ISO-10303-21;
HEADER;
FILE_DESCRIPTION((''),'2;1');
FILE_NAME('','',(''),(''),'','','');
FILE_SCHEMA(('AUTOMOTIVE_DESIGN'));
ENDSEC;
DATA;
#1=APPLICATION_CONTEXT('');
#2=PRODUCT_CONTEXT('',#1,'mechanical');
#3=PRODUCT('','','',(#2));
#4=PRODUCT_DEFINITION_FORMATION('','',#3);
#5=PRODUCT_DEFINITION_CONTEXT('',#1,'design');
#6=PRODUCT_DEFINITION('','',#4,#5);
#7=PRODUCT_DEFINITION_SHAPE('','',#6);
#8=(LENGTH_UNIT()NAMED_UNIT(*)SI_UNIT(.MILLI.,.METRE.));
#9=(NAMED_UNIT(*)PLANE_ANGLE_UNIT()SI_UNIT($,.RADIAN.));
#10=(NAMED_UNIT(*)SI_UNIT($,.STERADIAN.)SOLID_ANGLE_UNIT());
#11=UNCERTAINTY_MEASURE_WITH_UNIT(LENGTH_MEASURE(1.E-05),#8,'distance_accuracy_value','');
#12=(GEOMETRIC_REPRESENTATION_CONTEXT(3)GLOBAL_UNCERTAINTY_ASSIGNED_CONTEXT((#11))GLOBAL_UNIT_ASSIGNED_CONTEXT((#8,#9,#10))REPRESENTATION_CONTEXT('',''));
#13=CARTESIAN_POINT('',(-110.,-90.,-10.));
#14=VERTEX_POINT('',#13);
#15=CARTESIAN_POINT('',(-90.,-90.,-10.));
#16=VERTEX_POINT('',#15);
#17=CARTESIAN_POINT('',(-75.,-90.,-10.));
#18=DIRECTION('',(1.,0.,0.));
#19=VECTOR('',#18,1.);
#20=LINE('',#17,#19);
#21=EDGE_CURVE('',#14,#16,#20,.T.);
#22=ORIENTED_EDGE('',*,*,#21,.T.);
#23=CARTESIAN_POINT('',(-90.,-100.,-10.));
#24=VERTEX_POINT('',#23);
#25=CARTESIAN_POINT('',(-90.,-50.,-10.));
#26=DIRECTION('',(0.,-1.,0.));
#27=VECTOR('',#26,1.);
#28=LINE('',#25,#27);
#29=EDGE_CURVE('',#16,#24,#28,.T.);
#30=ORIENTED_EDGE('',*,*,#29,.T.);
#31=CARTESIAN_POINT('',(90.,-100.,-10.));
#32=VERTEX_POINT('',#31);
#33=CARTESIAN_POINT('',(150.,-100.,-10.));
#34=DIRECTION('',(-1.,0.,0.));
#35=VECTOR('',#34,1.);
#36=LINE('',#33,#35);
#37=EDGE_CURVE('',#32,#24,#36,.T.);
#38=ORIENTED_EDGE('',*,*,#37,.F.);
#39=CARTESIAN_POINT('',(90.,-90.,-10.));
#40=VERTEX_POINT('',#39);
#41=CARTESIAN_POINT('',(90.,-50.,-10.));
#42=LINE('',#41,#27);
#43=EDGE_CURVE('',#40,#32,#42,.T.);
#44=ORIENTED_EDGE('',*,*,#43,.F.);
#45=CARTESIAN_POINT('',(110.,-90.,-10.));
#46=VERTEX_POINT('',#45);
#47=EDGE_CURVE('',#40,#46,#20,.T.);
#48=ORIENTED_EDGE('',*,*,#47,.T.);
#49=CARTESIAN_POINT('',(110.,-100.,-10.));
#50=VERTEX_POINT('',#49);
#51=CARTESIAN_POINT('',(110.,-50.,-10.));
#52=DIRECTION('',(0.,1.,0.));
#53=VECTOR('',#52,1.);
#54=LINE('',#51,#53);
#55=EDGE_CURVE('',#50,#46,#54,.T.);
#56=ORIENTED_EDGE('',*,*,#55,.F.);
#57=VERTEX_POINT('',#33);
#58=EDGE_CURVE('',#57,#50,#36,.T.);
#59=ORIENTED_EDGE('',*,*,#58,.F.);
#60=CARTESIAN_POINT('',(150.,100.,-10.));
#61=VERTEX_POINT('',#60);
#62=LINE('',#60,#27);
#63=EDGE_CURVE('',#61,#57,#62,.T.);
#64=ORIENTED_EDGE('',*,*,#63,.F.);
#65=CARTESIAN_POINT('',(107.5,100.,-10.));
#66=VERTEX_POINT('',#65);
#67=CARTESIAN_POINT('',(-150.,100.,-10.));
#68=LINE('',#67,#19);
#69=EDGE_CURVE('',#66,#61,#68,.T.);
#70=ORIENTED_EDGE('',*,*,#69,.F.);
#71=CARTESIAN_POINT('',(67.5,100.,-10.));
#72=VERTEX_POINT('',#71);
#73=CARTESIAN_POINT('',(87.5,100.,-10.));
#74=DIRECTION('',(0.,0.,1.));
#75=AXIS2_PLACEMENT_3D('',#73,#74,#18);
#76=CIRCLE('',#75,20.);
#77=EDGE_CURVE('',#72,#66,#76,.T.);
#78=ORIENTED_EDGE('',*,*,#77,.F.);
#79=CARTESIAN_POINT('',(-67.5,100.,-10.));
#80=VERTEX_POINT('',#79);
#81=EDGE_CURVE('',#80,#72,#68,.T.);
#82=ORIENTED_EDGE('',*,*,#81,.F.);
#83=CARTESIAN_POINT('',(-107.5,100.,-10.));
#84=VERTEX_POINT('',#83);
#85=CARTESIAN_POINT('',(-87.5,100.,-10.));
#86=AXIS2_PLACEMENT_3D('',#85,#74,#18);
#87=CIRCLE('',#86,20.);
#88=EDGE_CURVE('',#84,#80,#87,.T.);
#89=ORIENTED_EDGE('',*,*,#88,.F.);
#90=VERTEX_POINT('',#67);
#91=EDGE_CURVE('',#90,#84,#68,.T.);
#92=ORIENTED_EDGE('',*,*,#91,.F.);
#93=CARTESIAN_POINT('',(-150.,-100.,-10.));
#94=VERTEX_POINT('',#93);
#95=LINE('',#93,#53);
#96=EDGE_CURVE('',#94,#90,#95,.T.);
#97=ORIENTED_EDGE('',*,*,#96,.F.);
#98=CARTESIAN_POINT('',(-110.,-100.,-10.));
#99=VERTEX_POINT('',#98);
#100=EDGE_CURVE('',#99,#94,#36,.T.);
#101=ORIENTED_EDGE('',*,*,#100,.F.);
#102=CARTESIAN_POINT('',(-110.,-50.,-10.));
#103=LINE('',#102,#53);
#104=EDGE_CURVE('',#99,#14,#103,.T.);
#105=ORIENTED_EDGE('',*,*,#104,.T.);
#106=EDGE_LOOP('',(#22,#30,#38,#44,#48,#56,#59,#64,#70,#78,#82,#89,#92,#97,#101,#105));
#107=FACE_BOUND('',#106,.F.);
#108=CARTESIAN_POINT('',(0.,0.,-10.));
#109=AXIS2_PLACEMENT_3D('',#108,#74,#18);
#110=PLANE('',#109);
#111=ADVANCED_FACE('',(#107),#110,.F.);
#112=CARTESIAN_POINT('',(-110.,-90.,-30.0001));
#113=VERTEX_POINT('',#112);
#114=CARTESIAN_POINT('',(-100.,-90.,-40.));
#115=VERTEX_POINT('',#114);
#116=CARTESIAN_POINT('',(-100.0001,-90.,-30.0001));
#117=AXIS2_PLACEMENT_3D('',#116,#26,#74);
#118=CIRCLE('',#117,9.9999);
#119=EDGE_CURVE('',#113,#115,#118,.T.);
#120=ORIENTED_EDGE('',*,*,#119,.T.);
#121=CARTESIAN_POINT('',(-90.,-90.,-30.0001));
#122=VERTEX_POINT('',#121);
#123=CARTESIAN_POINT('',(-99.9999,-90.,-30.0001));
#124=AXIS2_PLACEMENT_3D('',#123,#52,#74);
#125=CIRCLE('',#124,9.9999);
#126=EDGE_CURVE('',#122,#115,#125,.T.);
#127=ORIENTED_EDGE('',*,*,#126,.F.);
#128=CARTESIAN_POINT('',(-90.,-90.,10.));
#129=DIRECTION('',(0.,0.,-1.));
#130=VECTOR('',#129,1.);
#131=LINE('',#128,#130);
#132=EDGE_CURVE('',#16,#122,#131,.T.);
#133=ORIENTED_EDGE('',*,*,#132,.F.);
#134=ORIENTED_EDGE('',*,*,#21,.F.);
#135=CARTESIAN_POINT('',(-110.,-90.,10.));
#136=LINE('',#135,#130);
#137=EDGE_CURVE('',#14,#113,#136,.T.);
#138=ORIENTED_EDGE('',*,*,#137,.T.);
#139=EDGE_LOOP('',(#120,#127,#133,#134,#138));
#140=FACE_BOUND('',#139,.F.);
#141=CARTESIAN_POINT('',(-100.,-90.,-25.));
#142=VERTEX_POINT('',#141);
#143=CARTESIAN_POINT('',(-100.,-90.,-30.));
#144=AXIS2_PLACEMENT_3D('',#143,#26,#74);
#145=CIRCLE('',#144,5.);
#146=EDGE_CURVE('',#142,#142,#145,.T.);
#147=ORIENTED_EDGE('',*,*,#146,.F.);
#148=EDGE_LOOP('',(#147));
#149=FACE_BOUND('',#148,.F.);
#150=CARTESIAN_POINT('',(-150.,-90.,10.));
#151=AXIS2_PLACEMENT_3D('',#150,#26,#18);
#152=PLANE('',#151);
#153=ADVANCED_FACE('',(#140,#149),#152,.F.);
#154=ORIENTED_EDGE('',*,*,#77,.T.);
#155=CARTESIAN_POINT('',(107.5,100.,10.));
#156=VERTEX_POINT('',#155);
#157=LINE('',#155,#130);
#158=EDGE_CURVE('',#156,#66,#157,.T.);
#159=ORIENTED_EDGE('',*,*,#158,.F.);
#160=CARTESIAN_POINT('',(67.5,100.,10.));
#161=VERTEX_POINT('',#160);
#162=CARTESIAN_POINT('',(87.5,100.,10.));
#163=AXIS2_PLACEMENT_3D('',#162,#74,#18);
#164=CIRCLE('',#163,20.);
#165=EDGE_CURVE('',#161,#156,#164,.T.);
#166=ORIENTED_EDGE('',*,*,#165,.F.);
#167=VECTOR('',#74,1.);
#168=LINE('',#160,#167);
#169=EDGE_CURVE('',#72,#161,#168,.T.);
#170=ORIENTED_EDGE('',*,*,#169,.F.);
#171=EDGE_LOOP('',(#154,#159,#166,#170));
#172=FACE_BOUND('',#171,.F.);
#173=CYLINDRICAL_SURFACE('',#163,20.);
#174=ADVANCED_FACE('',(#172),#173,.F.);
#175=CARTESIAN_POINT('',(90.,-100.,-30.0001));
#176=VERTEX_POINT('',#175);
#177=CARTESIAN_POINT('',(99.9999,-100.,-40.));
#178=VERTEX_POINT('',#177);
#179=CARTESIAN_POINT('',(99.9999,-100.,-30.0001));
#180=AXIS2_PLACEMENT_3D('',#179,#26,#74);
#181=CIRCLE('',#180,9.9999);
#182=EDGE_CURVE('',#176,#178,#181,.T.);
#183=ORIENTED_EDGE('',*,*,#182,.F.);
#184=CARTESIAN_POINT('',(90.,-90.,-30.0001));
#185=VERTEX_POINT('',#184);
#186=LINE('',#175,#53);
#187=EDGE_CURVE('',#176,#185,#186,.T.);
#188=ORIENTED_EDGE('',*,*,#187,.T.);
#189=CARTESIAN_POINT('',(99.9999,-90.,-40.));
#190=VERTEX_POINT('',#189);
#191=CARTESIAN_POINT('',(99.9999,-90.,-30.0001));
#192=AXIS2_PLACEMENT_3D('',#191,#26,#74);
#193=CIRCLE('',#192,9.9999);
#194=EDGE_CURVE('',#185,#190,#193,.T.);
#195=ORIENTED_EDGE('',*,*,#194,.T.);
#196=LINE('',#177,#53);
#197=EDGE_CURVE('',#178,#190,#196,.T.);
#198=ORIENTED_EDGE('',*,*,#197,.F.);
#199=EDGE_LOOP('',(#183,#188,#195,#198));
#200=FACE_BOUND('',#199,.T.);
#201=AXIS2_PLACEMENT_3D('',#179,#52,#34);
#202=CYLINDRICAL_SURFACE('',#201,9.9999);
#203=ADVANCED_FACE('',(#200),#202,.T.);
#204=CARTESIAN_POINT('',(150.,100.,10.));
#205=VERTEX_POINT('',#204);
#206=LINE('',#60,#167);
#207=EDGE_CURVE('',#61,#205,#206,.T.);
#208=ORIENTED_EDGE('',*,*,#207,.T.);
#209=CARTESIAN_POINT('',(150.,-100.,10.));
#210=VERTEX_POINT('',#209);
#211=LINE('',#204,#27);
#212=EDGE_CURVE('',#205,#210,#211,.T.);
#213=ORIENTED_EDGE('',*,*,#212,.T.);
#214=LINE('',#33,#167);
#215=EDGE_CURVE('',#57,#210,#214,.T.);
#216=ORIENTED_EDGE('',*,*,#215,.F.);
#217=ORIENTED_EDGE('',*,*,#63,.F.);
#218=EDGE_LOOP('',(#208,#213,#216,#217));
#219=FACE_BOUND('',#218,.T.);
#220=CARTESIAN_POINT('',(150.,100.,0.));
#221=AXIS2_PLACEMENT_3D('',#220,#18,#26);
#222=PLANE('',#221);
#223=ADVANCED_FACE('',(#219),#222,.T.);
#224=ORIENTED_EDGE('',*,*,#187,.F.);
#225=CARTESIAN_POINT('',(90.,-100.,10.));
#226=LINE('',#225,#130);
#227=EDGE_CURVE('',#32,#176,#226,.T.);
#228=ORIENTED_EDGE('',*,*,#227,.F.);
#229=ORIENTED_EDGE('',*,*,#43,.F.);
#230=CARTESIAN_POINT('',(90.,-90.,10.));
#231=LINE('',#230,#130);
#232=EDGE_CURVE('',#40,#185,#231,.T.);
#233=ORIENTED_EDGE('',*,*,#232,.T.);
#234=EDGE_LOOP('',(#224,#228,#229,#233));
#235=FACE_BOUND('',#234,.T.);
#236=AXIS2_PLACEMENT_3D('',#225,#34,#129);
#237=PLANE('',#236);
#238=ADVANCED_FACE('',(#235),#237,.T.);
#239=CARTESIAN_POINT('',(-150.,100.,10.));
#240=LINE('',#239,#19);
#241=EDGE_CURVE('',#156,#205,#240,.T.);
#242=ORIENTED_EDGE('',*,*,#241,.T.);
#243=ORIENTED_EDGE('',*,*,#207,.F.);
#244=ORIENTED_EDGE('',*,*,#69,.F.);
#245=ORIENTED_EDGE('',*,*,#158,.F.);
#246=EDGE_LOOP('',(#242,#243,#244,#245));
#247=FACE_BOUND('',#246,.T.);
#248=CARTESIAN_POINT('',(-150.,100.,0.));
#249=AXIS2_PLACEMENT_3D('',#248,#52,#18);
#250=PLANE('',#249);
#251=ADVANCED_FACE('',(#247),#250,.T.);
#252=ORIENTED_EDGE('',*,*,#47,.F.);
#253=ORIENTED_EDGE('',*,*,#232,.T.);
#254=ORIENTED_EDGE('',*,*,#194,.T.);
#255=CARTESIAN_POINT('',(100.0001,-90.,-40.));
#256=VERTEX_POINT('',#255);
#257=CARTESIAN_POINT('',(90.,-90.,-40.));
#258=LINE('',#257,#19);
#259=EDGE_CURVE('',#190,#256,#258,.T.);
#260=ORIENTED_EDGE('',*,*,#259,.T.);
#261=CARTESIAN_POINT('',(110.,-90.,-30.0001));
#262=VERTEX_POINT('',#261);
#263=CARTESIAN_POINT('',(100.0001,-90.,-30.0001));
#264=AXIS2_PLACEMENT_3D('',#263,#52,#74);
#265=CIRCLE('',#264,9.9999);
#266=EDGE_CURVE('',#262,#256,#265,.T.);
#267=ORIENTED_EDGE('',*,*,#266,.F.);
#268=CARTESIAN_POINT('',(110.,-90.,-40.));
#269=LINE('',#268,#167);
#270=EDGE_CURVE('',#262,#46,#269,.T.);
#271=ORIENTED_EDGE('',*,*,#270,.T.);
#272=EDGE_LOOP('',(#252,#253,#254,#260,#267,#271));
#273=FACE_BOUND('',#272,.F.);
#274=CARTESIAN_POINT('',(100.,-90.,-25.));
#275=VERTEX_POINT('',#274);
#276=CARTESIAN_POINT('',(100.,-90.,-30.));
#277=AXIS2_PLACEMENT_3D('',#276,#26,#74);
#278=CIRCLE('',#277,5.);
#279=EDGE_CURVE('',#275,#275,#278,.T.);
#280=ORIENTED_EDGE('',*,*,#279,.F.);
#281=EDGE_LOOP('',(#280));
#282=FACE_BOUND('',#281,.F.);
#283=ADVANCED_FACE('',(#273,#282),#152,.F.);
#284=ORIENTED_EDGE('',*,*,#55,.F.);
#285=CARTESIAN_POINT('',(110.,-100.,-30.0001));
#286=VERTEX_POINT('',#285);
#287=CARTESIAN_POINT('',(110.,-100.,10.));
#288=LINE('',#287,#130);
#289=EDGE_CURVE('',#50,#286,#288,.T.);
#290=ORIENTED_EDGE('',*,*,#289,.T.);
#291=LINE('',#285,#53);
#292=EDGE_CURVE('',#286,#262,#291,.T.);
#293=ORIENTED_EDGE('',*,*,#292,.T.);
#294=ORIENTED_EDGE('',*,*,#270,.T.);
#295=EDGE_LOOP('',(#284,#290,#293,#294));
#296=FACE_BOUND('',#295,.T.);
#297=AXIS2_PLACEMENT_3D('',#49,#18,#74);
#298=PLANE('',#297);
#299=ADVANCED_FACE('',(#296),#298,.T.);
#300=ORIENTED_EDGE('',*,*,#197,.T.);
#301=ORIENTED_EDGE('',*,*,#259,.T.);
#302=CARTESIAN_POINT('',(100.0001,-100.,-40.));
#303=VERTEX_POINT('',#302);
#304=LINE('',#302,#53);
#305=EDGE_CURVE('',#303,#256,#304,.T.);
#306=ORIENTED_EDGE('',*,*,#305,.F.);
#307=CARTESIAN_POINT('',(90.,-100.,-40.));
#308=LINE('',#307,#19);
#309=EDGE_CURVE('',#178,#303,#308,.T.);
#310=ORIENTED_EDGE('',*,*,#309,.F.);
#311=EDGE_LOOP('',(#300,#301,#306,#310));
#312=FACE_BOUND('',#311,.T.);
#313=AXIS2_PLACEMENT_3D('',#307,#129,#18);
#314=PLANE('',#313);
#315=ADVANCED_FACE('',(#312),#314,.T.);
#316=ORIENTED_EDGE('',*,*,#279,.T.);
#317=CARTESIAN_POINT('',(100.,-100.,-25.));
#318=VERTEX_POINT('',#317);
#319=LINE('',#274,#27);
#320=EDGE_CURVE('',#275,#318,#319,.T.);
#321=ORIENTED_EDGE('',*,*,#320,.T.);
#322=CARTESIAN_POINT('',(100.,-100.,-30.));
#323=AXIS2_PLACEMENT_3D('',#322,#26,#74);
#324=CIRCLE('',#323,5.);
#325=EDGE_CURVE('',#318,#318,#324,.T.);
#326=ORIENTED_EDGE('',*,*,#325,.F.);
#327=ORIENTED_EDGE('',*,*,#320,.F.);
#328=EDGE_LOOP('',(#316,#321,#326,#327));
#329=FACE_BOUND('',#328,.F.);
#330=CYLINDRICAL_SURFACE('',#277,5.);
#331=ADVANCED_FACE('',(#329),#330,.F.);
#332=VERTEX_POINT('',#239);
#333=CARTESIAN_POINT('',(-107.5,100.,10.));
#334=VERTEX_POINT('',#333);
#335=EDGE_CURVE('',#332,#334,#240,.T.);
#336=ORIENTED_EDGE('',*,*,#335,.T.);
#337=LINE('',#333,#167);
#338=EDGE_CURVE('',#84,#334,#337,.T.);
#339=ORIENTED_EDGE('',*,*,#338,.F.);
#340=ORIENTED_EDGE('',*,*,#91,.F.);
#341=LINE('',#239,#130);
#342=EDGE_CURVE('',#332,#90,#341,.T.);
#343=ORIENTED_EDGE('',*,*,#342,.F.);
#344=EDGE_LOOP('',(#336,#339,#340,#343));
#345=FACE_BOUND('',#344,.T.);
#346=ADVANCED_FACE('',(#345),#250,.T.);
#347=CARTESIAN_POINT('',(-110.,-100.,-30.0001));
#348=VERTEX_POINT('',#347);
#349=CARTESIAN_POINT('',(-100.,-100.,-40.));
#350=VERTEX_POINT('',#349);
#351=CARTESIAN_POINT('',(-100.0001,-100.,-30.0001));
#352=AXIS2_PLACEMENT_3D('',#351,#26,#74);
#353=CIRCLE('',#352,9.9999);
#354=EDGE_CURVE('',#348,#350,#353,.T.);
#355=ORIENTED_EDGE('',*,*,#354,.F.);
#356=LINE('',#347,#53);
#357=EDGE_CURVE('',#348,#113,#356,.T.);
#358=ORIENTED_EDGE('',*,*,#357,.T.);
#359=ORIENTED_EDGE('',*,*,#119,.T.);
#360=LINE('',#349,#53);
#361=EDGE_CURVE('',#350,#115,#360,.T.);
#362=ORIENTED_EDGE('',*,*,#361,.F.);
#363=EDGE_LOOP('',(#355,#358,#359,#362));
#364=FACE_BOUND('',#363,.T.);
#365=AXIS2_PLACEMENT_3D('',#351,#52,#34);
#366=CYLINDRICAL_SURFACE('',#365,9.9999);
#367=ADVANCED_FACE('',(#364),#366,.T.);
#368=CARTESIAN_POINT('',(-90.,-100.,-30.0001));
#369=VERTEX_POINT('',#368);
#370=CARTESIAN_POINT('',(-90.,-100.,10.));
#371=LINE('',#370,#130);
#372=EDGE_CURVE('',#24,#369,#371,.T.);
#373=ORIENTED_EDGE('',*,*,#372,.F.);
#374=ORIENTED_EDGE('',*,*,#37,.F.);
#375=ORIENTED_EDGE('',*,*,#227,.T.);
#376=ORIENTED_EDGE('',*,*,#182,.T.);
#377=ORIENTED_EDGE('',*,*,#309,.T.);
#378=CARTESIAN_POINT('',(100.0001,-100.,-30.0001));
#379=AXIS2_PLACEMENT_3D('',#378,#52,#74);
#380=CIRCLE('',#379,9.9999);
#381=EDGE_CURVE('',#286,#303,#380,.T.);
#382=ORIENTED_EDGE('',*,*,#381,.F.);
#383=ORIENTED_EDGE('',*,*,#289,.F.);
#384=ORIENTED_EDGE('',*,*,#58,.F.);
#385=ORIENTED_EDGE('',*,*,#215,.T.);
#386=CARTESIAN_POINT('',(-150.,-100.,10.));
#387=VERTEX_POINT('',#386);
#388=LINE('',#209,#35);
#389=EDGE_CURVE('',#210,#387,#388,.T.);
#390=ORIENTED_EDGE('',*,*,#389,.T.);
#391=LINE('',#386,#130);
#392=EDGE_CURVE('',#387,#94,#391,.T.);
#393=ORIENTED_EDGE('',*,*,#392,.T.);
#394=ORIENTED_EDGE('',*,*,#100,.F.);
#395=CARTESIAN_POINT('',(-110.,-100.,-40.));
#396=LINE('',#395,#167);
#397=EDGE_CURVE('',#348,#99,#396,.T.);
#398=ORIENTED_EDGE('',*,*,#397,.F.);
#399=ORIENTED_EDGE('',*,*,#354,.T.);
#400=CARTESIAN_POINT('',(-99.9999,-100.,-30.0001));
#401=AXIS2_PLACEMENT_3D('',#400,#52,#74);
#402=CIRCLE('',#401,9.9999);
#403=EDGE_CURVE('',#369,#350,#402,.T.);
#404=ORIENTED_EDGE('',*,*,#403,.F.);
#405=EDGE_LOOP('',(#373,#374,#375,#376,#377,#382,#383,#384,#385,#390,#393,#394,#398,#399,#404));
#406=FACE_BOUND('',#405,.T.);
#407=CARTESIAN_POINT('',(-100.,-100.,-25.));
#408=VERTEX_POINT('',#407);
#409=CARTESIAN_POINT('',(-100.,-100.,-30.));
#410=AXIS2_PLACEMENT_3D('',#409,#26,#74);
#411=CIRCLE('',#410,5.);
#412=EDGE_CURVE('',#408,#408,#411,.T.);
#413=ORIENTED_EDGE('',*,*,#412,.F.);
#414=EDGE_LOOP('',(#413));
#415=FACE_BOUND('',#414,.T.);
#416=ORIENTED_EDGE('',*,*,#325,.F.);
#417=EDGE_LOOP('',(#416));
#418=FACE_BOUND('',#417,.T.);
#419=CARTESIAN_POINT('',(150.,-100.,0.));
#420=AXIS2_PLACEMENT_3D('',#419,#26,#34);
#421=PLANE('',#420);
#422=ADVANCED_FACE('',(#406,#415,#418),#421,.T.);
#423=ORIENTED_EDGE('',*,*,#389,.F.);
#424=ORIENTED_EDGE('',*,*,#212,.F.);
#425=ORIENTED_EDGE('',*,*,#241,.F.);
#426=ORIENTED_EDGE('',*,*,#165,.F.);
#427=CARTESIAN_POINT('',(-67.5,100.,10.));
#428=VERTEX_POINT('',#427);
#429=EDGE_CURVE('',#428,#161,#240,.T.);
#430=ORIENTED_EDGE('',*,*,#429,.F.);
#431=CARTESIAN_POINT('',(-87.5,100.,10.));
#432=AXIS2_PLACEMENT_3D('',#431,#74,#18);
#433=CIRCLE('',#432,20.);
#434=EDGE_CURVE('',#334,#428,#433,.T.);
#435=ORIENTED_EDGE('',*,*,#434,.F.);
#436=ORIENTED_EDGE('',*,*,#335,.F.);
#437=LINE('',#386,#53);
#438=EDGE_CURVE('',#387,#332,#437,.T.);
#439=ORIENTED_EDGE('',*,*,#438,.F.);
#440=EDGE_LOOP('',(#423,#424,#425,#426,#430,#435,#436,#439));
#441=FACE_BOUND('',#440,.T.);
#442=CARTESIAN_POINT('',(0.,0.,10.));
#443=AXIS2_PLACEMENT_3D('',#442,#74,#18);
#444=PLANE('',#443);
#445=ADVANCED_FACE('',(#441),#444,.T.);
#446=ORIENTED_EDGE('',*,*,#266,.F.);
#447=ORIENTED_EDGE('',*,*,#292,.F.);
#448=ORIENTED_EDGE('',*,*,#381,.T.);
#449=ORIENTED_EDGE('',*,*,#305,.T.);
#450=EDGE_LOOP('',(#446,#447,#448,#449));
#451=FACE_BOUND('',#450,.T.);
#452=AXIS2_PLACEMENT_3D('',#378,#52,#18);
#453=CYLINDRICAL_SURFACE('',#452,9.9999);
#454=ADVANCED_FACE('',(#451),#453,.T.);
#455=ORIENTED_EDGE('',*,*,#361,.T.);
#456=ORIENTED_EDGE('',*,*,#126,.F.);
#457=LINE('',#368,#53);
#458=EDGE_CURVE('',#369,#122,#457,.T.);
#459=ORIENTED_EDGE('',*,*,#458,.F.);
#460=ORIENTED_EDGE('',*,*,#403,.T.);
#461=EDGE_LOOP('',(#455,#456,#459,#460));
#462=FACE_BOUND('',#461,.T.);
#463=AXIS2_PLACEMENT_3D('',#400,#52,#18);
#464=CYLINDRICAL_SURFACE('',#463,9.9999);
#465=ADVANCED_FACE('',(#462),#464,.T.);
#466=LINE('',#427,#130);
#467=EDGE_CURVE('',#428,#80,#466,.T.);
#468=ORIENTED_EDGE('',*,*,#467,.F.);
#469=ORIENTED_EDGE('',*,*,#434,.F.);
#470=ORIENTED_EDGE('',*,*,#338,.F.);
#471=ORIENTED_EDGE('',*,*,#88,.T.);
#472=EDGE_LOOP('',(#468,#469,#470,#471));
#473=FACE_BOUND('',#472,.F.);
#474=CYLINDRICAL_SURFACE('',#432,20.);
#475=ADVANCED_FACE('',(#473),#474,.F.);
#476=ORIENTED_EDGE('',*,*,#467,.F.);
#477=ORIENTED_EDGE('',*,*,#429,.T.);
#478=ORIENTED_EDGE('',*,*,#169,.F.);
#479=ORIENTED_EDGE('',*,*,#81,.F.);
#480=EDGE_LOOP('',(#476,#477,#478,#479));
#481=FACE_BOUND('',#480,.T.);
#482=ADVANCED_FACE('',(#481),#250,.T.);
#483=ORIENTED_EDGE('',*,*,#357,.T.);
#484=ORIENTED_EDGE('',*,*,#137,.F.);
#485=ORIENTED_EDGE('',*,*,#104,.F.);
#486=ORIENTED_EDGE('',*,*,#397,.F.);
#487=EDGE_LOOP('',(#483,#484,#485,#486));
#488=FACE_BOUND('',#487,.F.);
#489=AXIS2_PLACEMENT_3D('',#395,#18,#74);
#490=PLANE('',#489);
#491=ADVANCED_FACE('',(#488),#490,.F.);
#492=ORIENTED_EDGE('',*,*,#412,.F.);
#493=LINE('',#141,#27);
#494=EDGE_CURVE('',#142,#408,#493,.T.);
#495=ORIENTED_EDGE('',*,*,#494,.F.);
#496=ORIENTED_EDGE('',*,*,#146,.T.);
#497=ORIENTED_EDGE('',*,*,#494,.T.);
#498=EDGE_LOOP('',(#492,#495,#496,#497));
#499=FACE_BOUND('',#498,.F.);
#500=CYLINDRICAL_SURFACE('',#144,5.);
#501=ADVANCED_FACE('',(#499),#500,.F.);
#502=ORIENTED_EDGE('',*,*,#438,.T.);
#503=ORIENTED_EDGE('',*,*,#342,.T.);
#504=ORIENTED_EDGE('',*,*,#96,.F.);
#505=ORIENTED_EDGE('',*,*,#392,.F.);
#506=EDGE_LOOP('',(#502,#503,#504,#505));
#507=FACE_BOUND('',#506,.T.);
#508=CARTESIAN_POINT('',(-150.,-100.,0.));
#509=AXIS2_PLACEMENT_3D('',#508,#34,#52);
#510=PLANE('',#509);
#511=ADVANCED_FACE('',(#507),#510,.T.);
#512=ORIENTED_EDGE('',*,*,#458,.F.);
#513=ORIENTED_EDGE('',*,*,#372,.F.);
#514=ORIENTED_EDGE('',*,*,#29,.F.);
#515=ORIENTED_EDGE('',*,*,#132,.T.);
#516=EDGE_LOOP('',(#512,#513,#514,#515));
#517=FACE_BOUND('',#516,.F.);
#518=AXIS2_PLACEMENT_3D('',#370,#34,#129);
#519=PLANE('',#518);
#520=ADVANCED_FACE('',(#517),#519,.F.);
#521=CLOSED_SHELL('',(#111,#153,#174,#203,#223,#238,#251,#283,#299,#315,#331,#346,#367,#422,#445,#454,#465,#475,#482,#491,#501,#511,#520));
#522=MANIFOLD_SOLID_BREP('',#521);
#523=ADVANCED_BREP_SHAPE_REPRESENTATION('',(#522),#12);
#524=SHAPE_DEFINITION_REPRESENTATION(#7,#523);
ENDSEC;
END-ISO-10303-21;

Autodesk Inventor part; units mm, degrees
ref_plane "YZ Plane" through (0, 0, 0) normal (1, 0, 0) x (0, 1, 0)
ref_plane "XZ Plane" through (0, 0, 0) normal (0, 1, 0) x (-1, 0, 0)
ref_plane "XY Plane" through (0, 0, 0) normal (0, 0, 1) x (1, 0, 0)
sketch "草图1" plane through (0, 0, 0) normal (0, 0, 1) x (1, 0, 0)
  line L0 (150, -100) -> (-150, -100)
  line L1 (-150, -100) -> (-150, 100)
  line L2 (-150, 100) -> (150, 100)
  line L3 (150, 100) -> (150, -100)
  line L4 (150, -100) -> (-150, 100) construction
  line L5 (-150, -100) -> (150, 100) construction
  point P0 (0, 0)
  dimension "d0" = 300
  dimension "d1" = 200
extrude "拉伸1" add sketch "草图1" along normal mid plane 20
sketch "草图2" plane through (0, 0, 10) normal (0, 0, 1) x (1, 0, 0)
  line L0 (150, 100) -> (-150, 100) construction
  line L1 (-150, 100) -> (-150, -100) construction
  line L2 (-150, -100) -> (150, -100) construction
  line L3 (150, -100) -> (150, 100) construction
  line L4 (150, 100) -> (-150, 100) construction
  circle A0 centre (-87.5, 100) radius 20
  line L5 (0, 0) -> (0, 160.0465) construction
  circle A1 centre (87.5, 100) radius 20
  dimension "d4" = 40
  dimension "d5" = 175
extrude "拉伸2" cut sketch "草图2" against normal blind 20
sketch "草图3" plane through (-150, -100, 10) normal (0, -1, 0) x (1, 0, 0)
  line L0 (300, -20) -> (300, 0) construction
  line L1 (0, 0) -> (300, 0) construction
  line L2 (0, -20) -> (0, 0) construction
  line L3 (300, -20) -> (0, -20) construction
  line L4 (0, -20) -> (42.5, -20) projected
  line L5 (150, -10) -> (150, 57.6375)
  line L6 (300, -20) -> (300, 0) construction
  line L7 (300, -20) -> (257.5, -20) construction
  line L8 (0, 0) -> (300, 0) projected
  line L9 (40, 0) -> (60, 0)
  line L10 (60, 0) -> (60, -50)
  line L11 (60, -50) -> (40, -50)
  line L12 (40, -50) -> (40, 0)
  line L13 (300, -20) -> (300, 0) construction
  line L14 (300, -20) -> (257.5, -20)
  line L15 (260, 0) -> (240, 0)
  line L16 (240, 0) -> (240, -50)
  line L17 (240, -50) -> (260, -50)
  line L18 (260, -50) -> (260, 0)
  point P0 (260, 0)
  point P1 (240, 0)
  dimension "d20" = 20
  dimension "d21" = 50
  dimension "d22" = 180
extrude "拉伸4" add sketch "草图3" against normal blind 10
full round fillet "全圆角3" first side at (110, -96.6667, -30) centre faces at (96.6667, -96.6667, -40) second side at (90, -96.6667, -20)
mirror "镜像1" about plane through (0, 0, 0) normal (1, 0, 0) of "全圆角3"
sketch "草图5" plane through (-150, -90, 10) normal (0, 1, 0) x (1, 0, 0)
  arc A0 (260, 40) -> (240, 40) centre (250, 40) ccw projected
  arc A1 (60, 40) -> (40, 40) centre (50, 40) ccw projected
  point P0 (150, 10)
hole "孔2" at (100, -90, -30) at (-100, -90, -30) direction (0, -1, 0) diameter 10 end through all
properties part number "支撑板1"
